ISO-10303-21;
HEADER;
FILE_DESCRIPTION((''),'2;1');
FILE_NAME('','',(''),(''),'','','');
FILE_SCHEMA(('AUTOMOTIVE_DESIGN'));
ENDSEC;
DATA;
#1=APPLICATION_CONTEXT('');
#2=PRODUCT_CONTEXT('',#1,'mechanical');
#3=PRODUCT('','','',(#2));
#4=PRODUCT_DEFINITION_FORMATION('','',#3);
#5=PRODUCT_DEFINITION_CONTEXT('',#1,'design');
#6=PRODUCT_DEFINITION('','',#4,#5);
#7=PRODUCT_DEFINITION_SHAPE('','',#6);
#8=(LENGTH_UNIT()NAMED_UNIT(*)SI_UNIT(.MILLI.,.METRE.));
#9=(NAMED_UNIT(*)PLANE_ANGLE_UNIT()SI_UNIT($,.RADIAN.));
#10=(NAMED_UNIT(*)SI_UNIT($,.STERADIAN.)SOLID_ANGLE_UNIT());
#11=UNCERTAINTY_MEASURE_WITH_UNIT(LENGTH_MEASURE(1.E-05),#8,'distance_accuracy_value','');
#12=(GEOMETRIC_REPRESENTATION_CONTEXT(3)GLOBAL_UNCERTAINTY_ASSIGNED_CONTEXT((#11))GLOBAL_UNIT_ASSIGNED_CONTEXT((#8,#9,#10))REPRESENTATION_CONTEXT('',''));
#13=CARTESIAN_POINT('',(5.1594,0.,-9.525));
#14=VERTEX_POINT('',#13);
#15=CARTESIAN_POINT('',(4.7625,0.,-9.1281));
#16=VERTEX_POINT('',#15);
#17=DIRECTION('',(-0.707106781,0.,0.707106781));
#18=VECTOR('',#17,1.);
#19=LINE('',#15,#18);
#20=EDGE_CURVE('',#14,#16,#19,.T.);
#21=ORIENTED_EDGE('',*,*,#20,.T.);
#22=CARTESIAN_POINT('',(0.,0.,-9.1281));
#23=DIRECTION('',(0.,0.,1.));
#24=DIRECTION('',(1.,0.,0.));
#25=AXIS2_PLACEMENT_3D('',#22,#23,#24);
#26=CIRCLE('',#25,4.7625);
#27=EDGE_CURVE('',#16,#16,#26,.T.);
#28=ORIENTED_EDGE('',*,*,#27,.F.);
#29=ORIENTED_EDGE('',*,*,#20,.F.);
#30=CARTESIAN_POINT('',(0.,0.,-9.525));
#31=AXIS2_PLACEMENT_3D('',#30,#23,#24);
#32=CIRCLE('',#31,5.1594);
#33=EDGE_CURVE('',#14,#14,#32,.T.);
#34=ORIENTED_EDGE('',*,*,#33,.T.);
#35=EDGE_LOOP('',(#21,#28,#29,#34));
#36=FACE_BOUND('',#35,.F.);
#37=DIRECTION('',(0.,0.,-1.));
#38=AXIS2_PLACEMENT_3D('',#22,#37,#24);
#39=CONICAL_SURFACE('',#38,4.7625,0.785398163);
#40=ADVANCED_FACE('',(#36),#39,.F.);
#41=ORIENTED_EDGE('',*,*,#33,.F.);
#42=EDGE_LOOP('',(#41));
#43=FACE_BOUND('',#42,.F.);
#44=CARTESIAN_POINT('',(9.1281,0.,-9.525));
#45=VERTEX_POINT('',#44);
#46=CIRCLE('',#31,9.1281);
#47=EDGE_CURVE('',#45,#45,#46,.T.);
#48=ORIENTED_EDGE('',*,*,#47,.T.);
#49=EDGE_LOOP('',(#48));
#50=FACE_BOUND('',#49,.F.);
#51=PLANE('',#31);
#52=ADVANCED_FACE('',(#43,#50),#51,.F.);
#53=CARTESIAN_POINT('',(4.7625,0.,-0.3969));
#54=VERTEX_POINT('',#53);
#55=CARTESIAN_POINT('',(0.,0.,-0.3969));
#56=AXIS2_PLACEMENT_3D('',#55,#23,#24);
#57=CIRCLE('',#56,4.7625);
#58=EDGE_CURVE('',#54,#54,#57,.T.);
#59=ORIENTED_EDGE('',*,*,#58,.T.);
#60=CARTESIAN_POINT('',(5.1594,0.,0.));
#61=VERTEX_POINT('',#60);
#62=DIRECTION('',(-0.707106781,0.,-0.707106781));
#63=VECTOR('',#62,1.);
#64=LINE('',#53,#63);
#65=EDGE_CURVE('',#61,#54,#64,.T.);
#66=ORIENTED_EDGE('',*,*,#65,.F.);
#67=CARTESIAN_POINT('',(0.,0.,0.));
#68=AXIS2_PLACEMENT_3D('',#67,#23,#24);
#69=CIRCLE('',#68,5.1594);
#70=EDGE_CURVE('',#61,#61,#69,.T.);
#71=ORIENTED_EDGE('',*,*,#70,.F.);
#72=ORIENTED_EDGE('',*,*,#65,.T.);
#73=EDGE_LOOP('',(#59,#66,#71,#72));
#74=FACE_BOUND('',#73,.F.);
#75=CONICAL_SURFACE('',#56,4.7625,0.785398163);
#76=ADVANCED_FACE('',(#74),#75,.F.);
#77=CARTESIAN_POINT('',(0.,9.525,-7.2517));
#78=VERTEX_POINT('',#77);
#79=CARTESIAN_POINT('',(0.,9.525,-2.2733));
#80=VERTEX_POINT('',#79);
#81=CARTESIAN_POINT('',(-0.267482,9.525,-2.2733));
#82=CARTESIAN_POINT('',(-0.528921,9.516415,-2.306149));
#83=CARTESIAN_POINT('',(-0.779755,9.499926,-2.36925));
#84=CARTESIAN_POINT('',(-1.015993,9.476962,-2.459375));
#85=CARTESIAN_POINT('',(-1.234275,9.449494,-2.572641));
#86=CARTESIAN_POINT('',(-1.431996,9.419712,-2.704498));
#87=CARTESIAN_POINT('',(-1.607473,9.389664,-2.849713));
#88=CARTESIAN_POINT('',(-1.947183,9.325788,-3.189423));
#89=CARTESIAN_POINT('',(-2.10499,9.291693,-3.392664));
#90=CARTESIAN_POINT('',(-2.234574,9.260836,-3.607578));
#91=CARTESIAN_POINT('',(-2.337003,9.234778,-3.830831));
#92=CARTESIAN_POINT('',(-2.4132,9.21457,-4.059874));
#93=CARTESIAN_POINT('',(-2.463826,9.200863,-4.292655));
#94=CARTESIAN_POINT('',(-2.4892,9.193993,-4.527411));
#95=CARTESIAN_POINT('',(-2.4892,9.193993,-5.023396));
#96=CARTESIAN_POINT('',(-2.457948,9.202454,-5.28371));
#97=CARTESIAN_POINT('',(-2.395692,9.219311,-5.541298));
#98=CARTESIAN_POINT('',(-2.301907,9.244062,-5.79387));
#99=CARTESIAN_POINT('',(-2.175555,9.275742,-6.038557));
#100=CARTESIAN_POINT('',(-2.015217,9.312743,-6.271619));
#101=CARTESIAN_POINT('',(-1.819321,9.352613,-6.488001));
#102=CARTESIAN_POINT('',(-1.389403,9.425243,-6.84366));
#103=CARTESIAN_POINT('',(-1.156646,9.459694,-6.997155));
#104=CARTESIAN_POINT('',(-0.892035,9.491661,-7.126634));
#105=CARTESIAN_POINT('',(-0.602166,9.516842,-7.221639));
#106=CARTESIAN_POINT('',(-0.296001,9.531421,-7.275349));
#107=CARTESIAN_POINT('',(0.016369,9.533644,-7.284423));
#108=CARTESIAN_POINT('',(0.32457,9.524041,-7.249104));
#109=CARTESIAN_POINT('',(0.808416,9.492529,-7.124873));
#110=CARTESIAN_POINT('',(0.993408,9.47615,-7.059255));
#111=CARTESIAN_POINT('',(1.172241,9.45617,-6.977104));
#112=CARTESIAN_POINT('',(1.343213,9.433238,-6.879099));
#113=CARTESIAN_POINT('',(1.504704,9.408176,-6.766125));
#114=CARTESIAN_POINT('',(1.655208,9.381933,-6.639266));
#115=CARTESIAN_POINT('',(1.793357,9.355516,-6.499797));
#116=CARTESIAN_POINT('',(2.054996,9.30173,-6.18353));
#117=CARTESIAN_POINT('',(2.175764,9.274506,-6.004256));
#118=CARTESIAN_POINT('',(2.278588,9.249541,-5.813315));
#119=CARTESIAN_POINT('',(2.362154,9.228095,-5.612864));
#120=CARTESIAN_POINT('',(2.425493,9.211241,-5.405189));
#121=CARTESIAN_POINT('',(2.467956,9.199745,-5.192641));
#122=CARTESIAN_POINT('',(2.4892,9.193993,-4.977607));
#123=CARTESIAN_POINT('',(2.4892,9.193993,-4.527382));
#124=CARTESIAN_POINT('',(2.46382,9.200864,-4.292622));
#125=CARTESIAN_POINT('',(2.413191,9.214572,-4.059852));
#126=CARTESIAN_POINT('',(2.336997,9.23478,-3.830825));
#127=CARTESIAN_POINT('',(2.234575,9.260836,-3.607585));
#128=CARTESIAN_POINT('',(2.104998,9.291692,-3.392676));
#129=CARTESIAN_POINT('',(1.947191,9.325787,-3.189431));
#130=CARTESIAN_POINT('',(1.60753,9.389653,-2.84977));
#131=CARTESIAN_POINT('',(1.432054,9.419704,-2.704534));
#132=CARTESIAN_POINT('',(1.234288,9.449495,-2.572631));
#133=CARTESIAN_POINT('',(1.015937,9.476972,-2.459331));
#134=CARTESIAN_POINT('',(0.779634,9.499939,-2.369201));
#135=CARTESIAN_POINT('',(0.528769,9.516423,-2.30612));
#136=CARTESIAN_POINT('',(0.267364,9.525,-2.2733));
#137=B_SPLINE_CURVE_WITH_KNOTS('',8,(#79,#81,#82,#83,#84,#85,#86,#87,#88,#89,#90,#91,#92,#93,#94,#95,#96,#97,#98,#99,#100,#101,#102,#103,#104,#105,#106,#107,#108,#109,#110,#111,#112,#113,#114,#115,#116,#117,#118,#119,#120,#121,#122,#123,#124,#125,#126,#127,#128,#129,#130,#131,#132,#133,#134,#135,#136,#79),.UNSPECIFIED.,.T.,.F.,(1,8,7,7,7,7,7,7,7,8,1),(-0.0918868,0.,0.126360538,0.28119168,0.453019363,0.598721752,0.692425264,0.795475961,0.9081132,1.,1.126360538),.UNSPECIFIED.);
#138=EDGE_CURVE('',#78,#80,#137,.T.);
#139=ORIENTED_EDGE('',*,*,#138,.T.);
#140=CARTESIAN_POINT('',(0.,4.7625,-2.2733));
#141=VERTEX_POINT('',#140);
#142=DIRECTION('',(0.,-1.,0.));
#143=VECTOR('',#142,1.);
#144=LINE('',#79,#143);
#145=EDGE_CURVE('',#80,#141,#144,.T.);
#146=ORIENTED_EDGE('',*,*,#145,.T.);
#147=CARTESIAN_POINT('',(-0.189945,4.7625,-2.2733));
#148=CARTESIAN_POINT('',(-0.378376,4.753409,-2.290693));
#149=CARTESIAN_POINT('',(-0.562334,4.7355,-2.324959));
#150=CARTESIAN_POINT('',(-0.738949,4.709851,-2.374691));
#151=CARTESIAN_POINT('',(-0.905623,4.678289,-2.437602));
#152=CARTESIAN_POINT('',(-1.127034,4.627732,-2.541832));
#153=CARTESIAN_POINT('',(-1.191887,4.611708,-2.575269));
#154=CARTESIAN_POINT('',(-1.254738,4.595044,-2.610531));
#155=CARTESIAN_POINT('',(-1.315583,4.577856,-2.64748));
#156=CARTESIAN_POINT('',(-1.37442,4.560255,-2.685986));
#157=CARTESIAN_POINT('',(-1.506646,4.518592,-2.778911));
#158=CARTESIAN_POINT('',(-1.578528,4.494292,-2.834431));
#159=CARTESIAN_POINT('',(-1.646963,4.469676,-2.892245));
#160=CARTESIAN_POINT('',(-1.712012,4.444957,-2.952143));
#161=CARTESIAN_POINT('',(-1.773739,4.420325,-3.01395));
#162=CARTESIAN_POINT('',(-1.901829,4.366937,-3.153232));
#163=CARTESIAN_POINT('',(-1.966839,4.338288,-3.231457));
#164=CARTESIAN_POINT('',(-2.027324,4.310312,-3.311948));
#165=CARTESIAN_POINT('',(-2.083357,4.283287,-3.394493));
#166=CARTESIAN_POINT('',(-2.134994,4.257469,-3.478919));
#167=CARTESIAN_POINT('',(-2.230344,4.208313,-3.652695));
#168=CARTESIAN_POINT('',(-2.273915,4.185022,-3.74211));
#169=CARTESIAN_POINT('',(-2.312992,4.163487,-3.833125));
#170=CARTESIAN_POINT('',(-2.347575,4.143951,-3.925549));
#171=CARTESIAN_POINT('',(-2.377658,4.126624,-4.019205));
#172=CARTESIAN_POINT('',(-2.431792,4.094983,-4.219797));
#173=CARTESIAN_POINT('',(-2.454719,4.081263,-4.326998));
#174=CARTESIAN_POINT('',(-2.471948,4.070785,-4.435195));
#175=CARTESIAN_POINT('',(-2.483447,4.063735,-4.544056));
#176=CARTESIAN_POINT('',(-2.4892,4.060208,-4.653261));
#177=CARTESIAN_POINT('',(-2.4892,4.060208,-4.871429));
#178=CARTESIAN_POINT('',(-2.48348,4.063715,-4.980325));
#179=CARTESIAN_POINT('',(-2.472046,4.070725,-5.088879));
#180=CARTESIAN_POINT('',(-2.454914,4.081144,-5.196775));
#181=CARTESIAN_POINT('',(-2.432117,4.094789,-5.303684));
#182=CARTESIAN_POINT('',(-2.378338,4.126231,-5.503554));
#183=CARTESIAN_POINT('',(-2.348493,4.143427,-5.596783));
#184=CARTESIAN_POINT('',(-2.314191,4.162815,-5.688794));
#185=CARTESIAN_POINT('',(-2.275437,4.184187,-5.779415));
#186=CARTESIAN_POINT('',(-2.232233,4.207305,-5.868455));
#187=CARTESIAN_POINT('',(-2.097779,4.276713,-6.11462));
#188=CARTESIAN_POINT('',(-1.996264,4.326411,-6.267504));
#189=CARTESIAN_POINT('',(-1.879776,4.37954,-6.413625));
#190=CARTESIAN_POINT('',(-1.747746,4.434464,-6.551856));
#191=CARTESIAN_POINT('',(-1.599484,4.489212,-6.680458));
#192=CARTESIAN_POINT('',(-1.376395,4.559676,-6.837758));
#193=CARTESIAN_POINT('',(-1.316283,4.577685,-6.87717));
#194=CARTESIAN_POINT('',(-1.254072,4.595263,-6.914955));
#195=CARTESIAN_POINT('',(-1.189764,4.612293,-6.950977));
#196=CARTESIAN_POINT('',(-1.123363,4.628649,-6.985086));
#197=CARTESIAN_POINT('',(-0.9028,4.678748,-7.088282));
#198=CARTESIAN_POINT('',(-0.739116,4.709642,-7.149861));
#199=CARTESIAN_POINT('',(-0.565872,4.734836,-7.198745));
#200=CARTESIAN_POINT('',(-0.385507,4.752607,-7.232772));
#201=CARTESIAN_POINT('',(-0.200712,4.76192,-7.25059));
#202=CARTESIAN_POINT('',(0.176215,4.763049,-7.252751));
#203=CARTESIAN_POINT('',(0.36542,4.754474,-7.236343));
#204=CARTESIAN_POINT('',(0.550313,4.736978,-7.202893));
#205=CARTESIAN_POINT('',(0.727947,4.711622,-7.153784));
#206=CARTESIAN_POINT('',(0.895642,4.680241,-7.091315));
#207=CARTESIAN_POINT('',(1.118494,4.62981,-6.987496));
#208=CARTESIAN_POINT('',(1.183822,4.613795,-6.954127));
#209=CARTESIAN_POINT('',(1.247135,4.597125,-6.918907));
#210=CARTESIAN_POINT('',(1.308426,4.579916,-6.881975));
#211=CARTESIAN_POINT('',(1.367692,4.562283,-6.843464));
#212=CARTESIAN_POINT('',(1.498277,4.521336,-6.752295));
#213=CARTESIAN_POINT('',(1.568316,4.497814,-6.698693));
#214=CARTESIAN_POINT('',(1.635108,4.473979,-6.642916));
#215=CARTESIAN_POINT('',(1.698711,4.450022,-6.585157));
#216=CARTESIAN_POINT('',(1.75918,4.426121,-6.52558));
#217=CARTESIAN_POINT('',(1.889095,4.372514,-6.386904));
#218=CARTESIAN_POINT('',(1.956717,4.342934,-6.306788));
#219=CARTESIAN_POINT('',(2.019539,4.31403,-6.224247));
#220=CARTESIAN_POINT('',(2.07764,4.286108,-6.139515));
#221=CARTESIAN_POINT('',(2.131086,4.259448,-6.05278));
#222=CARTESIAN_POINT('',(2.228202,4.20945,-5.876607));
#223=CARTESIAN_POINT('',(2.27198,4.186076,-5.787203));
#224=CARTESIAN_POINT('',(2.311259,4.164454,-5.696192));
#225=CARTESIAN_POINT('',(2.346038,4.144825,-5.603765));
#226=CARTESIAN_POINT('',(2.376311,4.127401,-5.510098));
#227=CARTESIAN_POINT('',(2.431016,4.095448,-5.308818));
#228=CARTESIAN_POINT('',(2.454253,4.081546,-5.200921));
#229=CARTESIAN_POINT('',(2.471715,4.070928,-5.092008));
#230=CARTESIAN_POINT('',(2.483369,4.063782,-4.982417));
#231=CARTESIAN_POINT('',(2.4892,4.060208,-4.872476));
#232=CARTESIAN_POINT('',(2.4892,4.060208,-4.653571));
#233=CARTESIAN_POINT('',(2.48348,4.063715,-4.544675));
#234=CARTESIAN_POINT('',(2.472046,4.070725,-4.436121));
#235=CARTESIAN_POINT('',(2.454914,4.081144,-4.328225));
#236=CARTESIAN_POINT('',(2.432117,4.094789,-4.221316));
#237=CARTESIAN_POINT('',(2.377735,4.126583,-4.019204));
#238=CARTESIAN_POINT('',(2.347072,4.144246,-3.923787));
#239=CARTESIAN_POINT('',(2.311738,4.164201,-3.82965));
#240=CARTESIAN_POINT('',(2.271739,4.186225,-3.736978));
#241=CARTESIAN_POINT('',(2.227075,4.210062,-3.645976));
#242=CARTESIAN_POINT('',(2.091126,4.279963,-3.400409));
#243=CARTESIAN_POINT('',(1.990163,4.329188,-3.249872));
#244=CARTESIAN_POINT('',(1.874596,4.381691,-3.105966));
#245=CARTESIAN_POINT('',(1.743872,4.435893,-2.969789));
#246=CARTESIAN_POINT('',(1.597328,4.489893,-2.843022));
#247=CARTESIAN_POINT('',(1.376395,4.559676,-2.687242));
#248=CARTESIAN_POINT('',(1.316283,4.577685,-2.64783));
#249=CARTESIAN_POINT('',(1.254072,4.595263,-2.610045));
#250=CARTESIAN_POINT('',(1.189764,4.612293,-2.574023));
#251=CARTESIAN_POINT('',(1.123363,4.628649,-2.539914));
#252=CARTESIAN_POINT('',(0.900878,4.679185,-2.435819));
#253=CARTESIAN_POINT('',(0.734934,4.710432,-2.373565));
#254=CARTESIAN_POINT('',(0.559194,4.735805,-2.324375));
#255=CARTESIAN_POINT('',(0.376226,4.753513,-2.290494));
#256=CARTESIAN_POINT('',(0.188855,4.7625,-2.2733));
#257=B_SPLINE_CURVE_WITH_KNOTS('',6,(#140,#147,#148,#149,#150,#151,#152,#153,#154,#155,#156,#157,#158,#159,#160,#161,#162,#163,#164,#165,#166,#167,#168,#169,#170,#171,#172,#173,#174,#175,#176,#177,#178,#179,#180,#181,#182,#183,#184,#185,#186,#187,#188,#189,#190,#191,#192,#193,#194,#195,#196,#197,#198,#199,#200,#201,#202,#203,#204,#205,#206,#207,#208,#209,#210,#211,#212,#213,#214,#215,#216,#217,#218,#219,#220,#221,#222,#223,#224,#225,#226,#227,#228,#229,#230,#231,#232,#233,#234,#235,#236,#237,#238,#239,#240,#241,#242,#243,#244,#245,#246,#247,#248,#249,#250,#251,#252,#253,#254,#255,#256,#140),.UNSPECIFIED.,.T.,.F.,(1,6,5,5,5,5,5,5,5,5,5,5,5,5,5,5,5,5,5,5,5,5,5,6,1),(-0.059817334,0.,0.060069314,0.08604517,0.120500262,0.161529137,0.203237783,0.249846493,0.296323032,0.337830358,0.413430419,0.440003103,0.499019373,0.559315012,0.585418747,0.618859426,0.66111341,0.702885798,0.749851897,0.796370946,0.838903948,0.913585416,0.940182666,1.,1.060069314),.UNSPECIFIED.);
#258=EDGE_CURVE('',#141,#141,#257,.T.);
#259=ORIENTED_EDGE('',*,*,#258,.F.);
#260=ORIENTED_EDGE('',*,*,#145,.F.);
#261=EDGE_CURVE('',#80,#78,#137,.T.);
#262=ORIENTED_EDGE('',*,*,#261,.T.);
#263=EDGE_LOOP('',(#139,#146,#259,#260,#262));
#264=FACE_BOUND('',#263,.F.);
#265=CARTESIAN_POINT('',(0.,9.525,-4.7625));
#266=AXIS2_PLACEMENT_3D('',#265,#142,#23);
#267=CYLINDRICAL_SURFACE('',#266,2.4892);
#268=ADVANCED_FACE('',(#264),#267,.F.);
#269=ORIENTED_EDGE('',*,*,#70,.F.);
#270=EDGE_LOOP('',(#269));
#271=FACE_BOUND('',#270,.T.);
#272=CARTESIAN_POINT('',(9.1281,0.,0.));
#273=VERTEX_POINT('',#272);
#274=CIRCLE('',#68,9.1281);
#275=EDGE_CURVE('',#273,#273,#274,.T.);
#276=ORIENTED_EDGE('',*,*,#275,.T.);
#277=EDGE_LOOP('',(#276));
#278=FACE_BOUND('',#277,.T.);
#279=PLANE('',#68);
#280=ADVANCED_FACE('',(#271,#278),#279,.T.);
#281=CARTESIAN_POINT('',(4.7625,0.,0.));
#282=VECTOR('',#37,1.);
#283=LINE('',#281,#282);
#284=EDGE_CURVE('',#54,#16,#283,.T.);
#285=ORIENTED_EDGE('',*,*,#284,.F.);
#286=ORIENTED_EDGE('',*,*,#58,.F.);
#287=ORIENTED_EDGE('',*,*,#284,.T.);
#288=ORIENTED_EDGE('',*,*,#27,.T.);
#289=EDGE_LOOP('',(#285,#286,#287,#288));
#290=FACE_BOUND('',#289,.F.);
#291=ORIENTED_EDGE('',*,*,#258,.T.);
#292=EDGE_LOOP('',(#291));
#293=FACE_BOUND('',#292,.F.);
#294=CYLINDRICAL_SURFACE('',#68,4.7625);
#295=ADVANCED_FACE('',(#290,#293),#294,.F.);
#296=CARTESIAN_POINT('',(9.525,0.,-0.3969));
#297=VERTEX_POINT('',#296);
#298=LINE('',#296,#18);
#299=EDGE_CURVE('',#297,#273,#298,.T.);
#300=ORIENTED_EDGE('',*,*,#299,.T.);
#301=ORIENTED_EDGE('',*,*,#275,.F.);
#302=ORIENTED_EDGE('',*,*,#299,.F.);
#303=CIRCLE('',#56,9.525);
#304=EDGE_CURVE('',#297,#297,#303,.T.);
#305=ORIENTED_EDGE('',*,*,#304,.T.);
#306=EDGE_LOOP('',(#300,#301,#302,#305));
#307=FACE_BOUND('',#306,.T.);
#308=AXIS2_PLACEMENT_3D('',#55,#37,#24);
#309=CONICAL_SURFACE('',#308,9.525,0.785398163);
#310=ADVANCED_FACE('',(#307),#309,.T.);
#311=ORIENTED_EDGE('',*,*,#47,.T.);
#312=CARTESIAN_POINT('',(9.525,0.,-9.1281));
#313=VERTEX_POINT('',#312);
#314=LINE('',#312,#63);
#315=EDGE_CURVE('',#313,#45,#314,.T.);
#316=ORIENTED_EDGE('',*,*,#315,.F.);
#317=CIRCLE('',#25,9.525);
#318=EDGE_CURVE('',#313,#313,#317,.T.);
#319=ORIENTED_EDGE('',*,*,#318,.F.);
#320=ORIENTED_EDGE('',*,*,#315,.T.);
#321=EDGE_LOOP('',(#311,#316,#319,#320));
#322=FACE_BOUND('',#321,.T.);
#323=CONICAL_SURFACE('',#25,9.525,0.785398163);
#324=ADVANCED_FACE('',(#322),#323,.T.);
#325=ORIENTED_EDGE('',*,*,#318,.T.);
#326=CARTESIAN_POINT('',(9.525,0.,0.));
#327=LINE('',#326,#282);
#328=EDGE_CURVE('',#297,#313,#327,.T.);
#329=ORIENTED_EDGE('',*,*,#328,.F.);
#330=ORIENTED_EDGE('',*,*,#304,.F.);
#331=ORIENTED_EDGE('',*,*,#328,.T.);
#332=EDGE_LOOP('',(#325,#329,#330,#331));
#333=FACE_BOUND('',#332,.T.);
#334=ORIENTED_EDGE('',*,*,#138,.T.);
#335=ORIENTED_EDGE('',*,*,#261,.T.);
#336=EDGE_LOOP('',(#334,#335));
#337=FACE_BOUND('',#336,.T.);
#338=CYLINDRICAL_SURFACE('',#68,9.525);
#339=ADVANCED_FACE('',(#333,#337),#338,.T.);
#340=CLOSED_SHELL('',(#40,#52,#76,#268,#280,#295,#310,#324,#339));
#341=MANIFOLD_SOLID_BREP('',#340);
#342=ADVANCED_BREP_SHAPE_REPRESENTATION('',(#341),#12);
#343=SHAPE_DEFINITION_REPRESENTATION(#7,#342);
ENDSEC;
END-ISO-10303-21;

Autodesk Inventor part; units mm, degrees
ref_plane "YZ Plane" through (0, 0, 0) normal (1, 0, 0) x (0, 1, 0)
ref_plane "XY Plane" through (0, 0, 0) normal (0, 0, 1) x (1, 0, 0)
sketch "Sketch1" plane through (0, 0, 0) normal (0, 0, 1) x (1, 0, 0)
  circle A0 centre (0, 0) radius 9.525
  dimension "d0" = 19.05
extrude "Extrusion1" add sketch "Sketch1" against normal blind 9.525
sketch "Sketch2" plane through (0, 0, 0) normal (0, 0, 1) x (1, 0, 0)
  circle A0 centre (0, 0) radius 9.525 projected
  circle A1 centre (0, 0) radius 4.7625
  dimension "d3" = 9.525
extrude "Extrusion2" cut sketch "Sketch2" against normal up to next contours A1
chamfer "Chamfer1" distance 0.3969 angle 45 4 edges at (-9.525, 0, 0) (-9.525, 0, -9.525) (-4.7625, 0, 0) (-4.7625, 0, -9.525)
ref_plane "Work Plane1" through (0, 9.525, 0) normal (0, 1, 0) x (-1, 0, 0)
sketch "Sketch3" plane through (0, 9.525, 0) normal (0, 1, 0) x (-1, 0, 0)
  line L0 (9.1281, -9.525) -> (-9.1281, -9.525) projected
  line L1 (9.525, -0.3969) -> (9.525, -9.1281) projected
  point P0 (0, 0)
  point P1 (0, -4.7625)
  point P2 (0, -9.525)
  point P3 (9.525, -4.7625)
hole "Hole1" at (0, 9.525, -4.7625) direction (0, -1, 0) diameter 4.9784 end up to surface thread size "1/4-20 UNC" class "2B" standard "ANSI Unified Screw Threads"
properties part number "Misc_ShaftCollar_Ruland_SC-6-F"
